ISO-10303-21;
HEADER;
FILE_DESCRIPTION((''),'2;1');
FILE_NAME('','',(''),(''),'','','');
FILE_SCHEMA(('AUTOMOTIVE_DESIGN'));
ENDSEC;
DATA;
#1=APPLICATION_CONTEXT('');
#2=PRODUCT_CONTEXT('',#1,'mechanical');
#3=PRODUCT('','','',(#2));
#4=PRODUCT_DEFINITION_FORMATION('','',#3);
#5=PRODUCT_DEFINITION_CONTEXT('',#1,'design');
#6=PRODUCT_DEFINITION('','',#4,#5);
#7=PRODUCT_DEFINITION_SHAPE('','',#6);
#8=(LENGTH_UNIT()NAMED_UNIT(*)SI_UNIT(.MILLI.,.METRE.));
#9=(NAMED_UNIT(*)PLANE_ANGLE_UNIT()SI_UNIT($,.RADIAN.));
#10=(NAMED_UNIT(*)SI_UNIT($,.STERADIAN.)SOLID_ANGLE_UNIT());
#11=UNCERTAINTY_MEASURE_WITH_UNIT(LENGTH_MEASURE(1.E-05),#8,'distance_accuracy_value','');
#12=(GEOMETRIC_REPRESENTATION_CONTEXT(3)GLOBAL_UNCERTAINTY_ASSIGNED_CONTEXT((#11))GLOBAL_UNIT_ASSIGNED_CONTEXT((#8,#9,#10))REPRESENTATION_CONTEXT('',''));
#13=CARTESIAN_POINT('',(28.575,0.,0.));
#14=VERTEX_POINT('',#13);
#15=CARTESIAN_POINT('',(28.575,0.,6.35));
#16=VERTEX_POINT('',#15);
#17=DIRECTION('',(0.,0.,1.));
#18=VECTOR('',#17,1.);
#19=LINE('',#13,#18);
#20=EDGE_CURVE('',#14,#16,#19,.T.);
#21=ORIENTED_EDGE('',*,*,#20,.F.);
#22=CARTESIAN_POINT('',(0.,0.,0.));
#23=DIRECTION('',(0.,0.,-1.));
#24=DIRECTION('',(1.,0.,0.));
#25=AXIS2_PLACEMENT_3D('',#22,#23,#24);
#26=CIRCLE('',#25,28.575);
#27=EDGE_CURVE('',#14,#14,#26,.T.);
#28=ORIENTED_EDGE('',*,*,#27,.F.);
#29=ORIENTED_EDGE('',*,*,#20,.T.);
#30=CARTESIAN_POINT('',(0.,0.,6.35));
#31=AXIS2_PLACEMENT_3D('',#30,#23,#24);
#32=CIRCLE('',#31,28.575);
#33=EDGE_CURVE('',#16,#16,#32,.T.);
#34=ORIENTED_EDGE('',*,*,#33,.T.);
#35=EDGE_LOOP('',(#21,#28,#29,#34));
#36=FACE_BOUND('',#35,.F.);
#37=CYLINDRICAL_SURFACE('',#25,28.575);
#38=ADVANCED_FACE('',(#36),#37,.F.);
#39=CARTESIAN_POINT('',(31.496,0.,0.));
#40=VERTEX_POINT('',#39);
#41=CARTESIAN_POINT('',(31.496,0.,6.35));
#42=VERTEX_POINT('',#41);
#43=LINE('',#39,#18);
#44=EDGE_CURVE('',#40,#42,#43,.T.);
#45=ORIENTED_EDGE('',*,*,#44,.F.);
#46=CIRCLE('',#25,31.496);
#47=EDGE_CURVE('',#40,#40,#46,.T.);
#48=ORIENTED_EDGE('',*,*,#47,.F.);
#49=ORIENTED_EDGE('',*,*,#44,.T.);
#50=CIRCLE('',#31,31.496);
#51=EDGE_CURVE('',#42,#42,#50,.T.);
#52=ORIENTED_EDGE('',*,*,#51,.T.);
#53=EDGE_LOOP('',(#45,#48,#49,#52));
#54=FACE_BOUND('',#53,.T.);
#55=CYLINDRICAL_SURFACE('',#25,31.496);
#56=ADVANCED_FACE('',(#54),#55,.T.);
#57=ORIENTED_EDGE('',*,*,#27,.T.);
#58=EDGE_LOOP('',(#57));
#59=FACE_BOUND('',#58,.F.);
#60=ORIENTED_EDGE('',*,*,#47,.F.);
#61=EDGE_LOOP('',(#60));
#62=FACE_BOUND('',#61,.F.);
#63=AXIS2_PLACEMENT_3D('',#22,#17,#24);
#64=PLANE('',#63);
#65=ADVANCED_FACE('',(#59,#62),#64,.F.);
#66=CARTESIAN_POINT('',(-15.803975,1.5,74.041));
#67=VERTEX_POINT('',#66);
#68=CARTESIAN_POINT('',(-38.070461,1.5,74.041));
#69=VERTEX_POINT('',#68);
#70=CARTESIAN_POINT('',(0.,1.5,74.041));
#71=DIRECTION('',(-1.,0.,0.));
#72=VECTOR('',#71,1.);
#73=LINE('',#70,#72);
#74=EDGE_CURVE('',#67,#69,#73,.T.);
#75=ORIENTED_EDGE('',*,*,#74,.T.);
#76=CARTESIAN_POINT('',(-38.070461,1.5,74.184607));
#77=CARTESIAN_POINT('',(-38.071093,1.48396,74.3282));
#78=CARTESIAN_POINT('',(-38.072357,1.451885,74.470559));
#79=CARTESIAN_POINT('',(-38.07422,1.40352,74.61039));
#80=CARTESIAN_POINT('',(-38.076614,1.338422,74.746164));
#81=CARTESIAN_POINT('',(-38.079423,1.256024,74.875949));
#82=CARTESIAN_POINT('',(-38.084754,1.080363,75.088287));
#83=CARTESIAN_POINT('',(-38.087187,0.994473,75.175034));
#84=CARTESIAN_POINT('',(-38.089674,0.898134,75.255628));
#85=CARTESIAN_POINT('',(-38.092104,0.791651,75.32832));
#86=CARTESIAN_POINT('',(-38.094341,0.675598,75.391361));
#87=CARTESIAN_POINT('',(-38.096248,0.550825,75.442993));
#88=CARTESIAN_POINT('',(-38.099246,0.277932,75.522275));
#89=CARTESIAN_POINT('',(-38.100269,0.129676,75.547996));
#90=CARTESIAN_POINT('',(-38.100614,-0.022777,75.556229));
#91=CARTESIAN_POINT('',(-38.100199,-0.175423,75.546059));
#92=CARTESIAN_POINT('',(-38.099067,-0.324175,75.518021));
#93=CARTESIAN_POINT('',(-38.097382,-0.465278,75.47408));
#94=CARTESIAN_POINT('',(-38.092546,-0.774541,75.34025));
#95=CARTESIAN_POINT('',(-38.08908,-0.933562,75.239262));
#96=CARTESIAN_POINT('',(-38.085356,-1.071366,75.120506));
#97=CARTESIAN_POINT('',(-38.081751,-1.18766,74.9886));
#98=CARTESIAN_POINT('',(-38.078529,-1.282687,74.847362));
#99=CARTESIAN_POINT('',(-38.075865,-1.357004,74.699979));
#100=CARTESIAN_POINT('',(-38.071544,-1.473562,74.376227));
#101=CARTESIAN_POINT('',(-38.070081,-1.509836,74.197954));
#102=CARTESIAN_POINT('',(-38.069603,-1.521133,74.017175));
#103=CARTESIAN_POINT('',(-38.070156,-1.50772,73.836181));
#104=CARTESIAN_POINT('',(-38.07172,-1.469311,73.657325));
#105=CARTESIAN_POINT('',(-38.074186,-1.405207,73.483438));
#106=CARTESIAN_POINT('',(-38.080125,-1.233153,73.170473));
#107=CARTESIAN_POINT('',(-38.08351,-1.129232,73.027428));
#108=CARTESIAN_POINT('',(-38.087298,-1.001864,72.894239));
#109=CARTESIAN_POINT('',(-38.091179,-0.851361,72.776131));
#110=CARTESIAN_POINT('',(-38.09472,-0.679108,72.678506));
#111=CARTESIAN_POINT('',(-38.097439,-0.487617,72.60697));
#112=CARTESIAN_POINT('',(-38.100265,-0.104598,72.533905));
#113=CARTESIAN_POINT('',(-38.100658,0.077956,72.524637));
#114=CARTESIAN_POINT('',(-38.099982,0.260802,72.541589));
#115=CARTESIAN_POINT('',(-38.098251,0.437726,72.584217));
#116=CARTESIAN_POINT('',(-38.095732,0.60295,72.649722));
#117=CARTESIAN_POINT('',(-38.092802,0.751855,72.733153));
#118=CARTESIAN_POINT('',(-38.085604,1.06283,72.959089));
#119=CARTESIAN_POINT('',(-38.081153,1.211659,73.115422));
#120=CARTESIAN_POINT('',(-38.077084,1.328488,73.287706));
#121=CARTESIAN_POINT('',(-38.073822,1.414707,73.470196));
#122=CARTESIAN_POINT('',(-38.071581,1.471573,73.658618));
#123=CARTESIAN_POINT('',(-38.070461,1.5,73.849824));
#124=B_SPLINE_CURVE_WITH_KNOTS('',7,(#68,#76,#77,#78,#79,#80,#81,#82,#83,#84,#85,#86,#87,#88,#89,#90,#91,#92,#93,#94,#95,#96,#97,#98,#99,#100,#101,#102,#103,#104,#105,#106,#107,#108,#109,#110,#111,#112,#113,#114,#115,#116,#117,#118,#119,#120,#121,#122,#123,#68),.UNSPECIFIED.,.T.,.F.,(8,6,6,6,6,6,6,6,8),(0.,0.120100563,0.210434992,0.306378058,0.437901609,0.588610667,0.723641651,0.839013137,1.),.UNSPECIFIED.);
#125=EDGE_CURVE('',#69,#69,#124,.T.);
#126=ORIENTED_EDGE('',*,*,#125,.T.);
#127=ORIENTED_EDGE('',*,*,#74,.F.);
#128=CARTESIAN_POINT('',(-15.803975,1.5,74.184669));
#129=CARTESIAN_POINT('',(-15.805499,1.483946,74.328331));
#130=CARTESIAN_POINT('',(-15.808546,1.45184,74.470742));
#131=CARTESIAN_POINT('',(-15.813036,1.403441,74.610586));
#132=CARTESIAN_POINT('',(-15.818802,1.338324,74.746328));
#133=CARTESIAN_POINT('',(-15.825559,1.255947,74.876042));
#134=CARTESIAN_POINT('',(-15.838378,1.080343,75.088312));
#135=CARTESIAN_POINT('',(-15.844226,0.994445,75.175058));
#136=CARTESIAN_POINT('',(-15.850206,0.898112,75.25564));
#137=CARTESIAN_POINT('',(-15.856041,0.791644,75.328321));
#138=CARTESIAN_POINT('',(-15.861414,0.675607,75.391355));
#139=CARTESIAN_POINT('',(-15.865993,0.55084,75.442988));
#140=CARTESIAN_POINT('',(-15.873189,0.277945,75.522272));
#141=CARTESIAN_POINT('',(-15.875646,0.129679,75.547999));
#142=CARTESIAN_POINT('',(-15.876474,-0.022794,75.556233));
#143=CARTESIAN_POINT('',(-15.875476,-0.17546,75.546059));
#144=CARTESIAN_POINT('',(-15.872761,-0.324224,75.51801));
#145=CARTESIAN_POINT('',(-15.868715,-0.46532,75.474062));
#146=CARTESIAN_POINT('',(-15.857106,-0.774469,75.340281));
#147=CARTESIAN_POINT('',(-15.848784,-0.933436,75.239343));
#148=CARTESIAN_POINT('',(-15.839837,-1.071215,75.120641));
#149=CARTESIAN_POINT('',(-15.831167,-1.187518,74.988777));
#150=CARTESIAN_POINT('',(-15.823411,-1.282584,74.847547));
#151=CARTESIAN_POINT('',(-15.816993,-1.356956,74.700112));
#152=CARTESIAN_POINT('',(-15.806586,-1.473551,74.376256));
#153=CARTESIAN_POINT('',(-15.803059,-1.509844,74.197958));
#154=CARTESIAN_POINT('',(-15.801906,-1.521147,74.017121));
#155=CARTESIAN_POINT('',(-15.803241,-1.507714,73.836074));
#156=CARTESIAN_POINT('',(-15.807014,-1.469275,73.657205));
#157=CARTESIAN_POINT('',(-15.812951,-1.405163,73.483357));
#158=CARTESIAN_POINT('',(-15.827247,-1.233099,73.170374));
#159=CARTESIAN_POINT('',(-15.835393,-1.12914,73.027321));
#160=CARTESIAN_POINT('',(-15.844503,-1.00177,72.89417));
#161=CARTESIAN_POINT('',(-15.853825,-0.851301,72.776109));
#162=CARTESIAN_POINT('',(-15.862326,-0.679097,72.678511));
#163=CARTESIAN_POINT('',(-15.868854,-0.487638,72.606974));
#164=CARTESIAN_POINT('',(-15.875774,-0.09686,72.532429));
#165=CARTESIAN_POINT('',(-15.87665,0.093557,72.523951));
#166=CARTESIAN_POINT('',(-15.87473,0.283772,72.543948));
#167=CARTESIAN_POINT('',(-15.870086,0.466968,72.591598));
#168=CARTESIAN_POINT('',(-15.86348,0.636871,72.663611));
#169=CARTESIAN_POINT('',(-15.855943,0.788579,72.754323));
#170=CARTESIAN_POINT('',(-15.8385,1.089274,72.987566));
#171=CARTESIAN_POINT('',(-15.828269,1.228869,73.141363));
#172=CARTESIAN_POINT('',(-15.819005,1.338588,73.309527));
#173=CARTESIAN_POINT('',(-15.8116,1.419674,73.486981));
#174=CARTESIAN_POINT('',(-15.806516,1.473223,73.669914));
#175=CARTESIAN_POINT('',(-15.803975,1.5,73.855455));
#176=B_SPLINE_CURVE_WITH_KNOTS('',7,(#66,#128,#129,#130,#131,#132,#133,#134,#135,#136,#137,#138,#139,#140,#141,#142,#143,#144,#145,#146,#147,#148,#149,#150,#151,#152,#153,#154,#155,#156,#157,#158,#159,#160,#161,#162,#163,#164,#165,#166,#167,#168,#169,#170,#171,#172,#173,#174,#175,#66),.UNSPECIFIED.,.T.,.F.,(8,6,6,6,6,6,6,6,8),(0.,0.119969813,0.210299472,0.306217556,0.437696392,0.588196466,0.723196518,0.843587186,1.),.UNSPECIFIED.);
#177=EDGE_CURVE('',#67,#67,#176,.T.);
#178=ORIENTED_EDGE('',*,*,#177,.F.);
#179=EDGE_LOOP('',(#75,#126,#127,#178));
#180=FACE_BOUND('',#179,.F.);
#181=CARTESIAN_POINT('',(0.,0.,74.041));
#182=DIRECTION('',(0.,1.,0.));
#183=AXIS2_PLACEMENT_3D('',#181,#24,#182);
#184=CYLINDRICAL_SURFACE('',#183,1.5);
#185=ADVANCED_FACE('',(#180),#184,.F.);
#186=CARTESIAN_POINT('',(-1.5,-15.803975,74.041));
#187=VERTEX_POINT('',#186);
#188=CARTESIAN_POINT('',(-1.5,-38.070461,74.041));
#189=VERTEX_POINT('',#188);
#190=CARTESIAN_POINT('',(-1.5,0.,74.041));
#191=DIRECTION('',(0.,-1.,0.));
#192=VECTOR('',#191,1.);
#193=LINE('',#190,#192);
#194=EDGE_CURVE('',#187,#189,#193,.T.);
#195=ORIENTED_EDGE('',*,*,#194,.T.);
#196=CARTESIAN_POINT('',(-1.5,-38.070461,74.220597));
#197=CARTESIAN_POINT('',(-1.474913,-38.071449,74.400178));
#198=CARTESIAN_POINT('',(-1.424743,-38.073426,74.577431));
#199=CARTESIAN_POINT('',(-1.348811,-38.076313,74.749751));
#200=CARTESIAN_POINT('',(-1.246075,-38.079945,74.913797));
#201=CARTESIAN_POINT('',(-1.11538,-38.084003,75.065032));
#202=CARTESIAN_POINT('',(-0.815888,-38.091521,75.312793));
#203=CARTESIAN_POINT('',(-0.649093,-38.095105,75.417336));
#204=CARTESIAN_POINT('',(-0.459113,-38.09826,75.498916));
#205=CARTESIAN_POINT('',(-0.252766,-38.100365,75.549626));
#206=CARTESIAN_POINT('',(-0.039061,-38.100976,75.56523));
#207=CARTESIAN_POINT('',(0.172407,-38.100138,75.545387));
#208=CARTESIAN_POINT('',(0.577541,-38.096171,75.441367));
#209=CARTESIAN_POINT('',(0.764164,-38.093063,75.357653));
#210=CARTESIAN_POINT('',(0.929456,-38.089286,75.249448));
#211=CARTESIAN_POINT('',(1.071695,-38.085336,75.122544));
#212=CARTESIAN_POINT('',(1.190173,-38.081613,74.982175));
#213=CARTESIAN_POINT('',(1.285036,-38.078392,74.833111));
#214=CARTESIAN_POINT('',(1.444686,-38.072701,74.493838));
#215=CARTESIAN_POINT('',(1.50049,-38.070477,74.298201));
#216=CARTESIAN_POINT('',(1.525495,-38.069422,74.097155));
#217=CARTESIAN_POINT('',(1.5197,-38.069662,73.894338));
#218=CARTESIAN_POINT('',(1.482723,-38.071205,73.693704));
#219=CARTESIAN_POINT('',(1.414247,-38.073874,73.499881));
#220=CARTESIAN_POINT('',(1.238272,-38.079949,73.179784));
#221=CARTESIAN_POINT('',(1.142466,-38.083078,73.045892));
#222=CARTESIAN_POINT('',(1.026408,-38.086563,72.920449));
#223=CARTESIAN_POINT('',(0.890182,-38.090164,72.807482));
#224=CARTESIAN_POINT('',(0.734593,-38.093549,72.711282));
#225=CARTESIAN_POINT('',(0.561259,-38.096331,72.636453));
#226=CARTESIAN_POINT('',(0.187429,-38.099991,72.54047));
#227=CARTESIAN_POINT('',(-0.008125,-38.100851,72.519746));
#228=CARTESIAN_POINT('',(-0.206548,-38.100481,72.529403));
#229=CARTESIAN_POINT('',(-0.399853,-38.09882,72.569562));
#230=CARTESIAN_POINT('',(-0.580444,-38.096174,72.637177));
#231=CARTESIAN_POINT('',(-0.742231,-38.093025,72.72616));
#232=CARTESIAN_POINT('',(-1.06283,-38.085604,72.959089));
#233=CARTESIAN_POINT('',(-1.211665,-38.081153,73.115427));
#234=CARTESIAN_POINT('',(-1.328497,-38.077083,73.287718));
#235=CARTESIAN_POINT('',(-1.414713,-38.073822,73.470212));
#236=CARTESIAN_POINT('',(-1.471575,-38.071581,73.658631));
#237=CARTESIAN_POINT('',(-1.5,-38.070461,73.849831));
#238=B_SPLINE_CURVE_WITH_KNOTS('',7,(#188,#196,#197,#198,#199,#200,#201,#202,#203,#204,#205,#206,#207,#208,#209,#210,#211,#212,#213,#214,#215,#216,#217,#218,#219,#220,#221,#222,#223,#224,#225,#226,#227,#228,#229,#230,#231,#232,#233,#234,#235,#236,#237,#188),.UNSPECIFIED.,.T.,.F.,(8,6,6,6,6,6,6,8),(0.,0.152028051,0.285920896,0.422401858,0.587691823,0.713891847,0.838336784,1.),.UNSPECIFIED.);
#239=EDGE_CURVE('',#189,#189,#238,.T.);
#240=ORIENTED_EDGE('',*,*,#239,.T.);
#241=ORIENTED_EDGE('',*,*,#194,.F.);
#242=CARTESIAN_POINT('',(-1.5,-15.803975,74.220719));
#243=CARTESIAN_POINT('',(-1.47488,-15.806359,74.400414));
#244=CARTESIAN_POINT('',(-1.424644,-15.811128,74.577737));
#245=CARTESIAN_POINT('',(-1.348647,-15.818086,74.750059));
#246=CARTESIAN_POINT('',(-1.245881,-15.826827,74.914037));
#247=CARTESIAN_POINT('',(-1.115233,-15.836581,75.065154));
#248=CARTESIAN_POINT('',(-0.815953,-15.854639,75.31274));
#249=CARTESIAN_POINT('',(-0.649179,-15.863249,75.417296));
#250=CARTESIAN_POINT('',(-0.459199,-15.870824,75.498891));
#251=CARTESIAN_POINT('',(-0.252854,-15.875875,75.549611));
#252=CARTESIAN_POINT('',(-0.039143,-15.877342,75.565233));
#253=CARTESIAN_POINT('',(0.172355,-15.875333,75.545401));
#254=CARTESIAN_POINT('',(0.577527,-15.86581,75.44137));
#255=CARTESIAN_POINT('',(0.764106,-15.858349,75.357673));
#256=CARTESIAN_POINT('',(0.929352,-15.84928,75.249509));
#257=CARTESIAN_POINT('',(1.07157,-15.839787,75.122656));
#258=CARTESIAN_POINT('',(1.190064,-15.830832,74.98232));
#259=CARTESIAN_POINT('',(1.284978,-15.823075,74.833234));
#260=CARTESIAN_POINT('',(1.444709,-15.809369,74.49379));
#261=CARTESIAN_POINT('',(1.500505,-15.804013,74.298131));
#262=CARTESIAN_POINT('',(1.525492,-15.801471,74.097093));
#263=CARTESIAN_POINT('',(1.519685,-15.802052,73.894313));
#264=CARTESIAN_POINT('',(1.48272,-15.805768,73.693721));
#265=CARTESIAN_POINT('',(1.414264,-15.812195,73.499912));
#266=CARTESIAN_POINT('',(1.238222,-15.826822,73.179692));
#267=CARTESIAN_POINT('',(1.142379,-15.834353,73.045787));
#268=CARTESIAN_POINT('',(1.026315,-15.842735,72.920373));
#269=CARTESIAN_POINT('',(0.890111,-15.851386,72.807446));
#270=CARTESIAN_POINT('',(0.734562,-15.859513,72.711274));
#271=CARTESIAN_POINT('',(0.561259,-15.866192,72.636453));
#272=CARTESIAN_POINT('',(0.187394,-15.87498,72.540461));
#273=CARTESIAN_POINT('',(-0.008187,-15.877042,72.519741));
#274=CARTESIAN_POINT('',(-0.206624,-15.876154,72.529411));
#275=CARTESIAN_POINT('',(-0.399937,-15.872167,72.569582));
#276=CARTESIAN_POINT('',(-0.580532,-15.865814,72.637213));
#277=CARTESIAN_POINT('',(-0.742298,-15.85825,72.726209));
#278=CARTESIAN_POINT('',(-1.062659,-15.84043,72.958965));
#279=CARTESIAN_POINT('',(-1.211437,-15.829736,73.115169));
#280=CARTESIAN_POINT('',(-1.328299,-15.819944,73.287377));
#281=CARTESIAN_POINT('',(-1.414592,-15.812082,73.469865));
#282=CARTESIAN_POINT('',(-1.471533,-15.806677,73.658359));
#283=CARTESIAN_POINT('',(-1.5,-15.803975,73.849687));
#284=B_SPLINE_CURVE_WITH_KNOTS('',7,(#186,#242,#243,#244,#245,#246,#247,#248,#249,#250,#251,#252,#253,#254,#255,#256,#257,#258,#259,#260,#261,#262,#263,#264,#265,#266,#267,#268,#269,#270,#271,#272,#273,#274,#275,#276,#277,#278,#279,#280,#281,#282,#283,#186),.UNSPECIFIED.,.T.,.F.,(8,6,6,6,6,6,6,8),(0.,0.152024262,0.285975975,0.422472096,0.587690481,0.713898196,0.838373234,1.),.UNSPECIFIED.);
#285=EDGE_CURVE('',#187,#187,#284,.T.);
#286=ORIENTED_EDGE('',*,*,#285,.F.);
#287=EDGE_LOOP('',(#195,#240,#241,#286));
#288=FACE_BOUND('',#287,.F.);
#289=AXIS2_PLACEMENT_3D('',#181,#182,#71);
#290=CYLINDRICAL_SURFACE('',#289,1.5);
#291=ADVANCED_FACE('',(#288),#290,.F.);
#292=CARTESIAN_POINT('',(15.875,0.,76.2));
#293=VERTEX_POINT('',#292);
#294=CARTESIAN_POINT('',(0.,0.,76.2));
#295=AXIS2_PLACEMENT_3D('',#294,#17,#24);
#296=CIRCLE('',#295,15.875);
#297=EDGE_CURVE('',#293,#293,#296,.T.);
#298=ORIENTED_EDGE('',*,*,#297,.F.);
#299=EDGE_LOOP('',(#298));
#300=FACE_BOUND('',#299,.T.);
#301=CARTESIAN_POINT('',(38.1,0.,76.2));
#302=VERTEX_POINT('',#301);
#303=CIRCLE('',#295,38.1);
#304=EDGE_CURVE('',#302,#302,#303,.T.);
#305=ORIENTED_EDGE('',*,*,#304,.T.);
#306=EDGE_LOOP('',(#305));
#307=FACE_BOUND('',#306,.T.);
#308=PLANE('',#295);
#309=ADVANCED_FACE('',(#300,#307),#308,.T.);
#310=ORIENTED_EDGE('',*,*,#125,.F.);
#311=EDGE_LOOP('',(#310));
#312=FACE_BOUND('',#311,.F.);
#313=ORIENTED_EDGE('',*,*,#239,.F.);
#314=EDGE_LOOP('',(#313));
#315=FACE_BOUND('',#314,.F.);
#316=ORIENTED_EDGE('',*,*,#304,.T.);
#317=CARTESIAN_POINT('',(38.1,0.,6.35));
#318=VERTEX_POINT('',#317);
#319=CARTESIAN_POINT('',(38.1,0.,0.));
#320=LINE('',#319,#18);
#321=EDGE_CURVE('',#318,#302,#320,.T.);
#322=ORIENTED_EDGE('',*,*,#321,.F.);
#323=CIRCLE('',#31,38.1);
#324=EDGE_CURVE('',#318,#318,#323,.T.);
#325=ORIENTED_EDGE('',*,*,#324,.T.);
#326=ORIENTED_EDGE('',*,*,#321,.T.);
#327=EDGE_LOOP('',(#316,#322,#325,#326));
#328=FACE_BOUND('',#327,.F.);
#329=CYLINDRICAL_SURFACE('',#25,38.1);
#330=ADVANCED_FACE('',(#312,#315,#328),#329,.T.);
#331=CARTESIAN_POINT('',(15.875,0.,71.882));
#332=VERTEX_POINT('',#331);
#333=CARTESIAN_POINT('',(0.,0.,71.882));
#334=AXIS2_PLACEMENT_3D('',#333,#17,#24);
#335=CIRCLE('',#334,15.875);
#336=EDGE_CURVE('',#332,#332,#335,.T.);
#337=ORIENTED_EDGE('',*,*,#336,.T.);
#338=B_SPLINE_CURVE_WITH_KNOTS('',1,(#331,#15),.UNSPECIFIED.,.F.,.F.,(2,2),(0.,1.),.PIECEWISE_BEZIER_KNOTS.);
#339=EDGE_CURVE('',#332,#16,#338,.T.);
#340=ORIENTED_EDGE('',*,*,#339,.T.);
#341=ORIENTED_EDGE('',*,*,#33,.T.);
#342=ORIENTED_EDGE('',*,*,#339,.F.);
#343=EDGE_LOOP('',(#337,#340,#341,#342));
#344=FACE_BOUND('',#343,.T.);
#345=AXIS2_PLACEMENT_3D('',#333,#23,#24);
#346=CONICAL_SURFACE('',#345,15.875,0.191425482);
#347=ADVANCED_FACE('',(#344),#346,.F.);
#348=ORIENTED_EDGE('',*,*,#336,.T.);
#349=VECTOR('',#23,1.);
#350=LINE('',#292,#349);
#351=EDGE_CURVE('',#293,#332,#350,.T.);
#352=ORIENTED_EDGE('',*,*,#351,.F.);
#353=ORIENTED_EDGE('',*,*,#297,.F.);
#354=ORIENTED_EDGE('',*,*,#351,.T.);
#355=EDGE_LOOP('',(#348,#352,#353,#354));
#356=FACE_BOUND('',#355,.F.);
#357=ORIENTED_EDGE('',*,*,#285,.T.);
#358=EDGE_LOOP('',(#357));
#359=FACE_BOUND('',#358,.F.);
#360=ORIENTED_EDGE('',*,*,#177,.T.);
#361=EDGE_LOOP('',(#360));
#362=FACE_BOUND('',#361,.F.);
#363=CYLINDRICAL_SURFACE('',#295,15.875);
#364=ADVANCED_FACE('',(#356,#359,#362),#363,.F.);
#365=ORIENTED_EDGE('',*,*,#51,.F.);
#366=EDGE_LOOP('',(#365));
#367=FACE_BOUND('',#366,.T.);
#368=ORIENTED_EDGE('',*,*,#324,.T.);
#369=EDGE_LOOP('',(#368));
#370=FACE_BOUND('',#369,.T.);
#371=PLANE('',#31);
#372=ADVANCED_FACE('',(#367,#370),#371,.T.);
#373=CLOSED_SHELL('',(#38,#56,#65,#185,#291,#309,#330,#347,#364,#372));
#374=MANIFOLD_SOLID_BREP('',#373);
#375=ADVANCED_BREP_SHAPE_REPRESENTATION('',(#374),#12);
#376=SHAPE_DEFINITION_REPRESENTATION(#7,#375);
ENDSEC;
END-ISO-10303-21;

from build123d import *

# Parameters (mm, degrees)
F0_R            = 38.1
F1_DEPTH        = 76.2
F3_R            = 28.575
F4_DEPTH        = 6.35
F5_R            = 1.5
F6_DEPTH        = 50.8
F6_COPIES_COUNT = 2
F6_COPIES_ANGLE = 90
F2_R            = 15.875
F7_DEPTH        = 4.318
F7_FACE_R       = 15.875
F4_FACE_R       = 28.575
F9_R            = 38.1
F9_R_2          = 31.496
F10_DEPTH       = 6.35


# Not quite as in the source:
# - a pattern or mirror of a feature is missing from the dataset's text; its kind, count and spacing are read off the source's solid


with BuildPart() as f1:
    # F0 (on Top) → F1 (new body)
    with BuildSketch(Plane.XY):
        Circle(F0_R)
    extrude(amount=F1_DEPTH)

    # F3 (on face) → F4 (cut)
    with BuildSketch(Plane(origin=(0, 0, 0), x_dir=(1, 0, 0), z_dir=(0, 0, -1))):
        Circle(F3_R)
    extrude(amount=-F4_DEPTH, mode=Mode.SUBTRACT)

    # F5 (on Right) → F6 (cut)
    with BuildSketch(Plane.YZ):
        with Locations((0, 74.041)):
            Circle(F5_R)
    f6 = extrude(amount=-F6_DEPTH, mode=Mode.SUBTRACT)

    # F6_copies: F6 ×2 about axis
    f6_copies_axis = Axis((0, 0, 0), (0, 0, 1))
    for i in range(1, F6_COPIES_COUNT):
        add(f6.rotate(f6_copies_axis, i * F6_COPIES_ANGLE / (F6_COPIES_COUNT - 1)), mode=Mode.SUBTRACT)

    # F2 (on face) → F7 (cut)
    with BuildSketch(Plane.XY.offset(76.2)):
        Circle(F2_R)
    extrude(amount=-F7_DEPTH, mode=Mode.SUBTRACT)

    # F7_face (on face) → F8 section 0
    with BuildSketch(Plane.XY.offset(71.882)):
        Circle(F7_FACE_R)
    # F4_face (on face) → F8 section 1
    with BuildSketch(Plane(origin=(0, 0, 6.35), x_dir=(1, 0, 0), z_dir=(0, 0, -1))):
        Circle(F4_FACE_R)
    loft(mode=Mode.SUBTRACT)

    # F9 (on face) → F10 (cut)
    with BuildSketch(Plane(origin=(0, 0, 0), x_dir=(1, 0, 0), z_dir=(0, 0, -1))):
        Circle(F9_R)
        Circle(F9_R_2, mode=Mode.SUBTRACT)
    extrude(amount=-F10_DEPTH, mode=Mode.SUBTRACT)


solid = f1.part
